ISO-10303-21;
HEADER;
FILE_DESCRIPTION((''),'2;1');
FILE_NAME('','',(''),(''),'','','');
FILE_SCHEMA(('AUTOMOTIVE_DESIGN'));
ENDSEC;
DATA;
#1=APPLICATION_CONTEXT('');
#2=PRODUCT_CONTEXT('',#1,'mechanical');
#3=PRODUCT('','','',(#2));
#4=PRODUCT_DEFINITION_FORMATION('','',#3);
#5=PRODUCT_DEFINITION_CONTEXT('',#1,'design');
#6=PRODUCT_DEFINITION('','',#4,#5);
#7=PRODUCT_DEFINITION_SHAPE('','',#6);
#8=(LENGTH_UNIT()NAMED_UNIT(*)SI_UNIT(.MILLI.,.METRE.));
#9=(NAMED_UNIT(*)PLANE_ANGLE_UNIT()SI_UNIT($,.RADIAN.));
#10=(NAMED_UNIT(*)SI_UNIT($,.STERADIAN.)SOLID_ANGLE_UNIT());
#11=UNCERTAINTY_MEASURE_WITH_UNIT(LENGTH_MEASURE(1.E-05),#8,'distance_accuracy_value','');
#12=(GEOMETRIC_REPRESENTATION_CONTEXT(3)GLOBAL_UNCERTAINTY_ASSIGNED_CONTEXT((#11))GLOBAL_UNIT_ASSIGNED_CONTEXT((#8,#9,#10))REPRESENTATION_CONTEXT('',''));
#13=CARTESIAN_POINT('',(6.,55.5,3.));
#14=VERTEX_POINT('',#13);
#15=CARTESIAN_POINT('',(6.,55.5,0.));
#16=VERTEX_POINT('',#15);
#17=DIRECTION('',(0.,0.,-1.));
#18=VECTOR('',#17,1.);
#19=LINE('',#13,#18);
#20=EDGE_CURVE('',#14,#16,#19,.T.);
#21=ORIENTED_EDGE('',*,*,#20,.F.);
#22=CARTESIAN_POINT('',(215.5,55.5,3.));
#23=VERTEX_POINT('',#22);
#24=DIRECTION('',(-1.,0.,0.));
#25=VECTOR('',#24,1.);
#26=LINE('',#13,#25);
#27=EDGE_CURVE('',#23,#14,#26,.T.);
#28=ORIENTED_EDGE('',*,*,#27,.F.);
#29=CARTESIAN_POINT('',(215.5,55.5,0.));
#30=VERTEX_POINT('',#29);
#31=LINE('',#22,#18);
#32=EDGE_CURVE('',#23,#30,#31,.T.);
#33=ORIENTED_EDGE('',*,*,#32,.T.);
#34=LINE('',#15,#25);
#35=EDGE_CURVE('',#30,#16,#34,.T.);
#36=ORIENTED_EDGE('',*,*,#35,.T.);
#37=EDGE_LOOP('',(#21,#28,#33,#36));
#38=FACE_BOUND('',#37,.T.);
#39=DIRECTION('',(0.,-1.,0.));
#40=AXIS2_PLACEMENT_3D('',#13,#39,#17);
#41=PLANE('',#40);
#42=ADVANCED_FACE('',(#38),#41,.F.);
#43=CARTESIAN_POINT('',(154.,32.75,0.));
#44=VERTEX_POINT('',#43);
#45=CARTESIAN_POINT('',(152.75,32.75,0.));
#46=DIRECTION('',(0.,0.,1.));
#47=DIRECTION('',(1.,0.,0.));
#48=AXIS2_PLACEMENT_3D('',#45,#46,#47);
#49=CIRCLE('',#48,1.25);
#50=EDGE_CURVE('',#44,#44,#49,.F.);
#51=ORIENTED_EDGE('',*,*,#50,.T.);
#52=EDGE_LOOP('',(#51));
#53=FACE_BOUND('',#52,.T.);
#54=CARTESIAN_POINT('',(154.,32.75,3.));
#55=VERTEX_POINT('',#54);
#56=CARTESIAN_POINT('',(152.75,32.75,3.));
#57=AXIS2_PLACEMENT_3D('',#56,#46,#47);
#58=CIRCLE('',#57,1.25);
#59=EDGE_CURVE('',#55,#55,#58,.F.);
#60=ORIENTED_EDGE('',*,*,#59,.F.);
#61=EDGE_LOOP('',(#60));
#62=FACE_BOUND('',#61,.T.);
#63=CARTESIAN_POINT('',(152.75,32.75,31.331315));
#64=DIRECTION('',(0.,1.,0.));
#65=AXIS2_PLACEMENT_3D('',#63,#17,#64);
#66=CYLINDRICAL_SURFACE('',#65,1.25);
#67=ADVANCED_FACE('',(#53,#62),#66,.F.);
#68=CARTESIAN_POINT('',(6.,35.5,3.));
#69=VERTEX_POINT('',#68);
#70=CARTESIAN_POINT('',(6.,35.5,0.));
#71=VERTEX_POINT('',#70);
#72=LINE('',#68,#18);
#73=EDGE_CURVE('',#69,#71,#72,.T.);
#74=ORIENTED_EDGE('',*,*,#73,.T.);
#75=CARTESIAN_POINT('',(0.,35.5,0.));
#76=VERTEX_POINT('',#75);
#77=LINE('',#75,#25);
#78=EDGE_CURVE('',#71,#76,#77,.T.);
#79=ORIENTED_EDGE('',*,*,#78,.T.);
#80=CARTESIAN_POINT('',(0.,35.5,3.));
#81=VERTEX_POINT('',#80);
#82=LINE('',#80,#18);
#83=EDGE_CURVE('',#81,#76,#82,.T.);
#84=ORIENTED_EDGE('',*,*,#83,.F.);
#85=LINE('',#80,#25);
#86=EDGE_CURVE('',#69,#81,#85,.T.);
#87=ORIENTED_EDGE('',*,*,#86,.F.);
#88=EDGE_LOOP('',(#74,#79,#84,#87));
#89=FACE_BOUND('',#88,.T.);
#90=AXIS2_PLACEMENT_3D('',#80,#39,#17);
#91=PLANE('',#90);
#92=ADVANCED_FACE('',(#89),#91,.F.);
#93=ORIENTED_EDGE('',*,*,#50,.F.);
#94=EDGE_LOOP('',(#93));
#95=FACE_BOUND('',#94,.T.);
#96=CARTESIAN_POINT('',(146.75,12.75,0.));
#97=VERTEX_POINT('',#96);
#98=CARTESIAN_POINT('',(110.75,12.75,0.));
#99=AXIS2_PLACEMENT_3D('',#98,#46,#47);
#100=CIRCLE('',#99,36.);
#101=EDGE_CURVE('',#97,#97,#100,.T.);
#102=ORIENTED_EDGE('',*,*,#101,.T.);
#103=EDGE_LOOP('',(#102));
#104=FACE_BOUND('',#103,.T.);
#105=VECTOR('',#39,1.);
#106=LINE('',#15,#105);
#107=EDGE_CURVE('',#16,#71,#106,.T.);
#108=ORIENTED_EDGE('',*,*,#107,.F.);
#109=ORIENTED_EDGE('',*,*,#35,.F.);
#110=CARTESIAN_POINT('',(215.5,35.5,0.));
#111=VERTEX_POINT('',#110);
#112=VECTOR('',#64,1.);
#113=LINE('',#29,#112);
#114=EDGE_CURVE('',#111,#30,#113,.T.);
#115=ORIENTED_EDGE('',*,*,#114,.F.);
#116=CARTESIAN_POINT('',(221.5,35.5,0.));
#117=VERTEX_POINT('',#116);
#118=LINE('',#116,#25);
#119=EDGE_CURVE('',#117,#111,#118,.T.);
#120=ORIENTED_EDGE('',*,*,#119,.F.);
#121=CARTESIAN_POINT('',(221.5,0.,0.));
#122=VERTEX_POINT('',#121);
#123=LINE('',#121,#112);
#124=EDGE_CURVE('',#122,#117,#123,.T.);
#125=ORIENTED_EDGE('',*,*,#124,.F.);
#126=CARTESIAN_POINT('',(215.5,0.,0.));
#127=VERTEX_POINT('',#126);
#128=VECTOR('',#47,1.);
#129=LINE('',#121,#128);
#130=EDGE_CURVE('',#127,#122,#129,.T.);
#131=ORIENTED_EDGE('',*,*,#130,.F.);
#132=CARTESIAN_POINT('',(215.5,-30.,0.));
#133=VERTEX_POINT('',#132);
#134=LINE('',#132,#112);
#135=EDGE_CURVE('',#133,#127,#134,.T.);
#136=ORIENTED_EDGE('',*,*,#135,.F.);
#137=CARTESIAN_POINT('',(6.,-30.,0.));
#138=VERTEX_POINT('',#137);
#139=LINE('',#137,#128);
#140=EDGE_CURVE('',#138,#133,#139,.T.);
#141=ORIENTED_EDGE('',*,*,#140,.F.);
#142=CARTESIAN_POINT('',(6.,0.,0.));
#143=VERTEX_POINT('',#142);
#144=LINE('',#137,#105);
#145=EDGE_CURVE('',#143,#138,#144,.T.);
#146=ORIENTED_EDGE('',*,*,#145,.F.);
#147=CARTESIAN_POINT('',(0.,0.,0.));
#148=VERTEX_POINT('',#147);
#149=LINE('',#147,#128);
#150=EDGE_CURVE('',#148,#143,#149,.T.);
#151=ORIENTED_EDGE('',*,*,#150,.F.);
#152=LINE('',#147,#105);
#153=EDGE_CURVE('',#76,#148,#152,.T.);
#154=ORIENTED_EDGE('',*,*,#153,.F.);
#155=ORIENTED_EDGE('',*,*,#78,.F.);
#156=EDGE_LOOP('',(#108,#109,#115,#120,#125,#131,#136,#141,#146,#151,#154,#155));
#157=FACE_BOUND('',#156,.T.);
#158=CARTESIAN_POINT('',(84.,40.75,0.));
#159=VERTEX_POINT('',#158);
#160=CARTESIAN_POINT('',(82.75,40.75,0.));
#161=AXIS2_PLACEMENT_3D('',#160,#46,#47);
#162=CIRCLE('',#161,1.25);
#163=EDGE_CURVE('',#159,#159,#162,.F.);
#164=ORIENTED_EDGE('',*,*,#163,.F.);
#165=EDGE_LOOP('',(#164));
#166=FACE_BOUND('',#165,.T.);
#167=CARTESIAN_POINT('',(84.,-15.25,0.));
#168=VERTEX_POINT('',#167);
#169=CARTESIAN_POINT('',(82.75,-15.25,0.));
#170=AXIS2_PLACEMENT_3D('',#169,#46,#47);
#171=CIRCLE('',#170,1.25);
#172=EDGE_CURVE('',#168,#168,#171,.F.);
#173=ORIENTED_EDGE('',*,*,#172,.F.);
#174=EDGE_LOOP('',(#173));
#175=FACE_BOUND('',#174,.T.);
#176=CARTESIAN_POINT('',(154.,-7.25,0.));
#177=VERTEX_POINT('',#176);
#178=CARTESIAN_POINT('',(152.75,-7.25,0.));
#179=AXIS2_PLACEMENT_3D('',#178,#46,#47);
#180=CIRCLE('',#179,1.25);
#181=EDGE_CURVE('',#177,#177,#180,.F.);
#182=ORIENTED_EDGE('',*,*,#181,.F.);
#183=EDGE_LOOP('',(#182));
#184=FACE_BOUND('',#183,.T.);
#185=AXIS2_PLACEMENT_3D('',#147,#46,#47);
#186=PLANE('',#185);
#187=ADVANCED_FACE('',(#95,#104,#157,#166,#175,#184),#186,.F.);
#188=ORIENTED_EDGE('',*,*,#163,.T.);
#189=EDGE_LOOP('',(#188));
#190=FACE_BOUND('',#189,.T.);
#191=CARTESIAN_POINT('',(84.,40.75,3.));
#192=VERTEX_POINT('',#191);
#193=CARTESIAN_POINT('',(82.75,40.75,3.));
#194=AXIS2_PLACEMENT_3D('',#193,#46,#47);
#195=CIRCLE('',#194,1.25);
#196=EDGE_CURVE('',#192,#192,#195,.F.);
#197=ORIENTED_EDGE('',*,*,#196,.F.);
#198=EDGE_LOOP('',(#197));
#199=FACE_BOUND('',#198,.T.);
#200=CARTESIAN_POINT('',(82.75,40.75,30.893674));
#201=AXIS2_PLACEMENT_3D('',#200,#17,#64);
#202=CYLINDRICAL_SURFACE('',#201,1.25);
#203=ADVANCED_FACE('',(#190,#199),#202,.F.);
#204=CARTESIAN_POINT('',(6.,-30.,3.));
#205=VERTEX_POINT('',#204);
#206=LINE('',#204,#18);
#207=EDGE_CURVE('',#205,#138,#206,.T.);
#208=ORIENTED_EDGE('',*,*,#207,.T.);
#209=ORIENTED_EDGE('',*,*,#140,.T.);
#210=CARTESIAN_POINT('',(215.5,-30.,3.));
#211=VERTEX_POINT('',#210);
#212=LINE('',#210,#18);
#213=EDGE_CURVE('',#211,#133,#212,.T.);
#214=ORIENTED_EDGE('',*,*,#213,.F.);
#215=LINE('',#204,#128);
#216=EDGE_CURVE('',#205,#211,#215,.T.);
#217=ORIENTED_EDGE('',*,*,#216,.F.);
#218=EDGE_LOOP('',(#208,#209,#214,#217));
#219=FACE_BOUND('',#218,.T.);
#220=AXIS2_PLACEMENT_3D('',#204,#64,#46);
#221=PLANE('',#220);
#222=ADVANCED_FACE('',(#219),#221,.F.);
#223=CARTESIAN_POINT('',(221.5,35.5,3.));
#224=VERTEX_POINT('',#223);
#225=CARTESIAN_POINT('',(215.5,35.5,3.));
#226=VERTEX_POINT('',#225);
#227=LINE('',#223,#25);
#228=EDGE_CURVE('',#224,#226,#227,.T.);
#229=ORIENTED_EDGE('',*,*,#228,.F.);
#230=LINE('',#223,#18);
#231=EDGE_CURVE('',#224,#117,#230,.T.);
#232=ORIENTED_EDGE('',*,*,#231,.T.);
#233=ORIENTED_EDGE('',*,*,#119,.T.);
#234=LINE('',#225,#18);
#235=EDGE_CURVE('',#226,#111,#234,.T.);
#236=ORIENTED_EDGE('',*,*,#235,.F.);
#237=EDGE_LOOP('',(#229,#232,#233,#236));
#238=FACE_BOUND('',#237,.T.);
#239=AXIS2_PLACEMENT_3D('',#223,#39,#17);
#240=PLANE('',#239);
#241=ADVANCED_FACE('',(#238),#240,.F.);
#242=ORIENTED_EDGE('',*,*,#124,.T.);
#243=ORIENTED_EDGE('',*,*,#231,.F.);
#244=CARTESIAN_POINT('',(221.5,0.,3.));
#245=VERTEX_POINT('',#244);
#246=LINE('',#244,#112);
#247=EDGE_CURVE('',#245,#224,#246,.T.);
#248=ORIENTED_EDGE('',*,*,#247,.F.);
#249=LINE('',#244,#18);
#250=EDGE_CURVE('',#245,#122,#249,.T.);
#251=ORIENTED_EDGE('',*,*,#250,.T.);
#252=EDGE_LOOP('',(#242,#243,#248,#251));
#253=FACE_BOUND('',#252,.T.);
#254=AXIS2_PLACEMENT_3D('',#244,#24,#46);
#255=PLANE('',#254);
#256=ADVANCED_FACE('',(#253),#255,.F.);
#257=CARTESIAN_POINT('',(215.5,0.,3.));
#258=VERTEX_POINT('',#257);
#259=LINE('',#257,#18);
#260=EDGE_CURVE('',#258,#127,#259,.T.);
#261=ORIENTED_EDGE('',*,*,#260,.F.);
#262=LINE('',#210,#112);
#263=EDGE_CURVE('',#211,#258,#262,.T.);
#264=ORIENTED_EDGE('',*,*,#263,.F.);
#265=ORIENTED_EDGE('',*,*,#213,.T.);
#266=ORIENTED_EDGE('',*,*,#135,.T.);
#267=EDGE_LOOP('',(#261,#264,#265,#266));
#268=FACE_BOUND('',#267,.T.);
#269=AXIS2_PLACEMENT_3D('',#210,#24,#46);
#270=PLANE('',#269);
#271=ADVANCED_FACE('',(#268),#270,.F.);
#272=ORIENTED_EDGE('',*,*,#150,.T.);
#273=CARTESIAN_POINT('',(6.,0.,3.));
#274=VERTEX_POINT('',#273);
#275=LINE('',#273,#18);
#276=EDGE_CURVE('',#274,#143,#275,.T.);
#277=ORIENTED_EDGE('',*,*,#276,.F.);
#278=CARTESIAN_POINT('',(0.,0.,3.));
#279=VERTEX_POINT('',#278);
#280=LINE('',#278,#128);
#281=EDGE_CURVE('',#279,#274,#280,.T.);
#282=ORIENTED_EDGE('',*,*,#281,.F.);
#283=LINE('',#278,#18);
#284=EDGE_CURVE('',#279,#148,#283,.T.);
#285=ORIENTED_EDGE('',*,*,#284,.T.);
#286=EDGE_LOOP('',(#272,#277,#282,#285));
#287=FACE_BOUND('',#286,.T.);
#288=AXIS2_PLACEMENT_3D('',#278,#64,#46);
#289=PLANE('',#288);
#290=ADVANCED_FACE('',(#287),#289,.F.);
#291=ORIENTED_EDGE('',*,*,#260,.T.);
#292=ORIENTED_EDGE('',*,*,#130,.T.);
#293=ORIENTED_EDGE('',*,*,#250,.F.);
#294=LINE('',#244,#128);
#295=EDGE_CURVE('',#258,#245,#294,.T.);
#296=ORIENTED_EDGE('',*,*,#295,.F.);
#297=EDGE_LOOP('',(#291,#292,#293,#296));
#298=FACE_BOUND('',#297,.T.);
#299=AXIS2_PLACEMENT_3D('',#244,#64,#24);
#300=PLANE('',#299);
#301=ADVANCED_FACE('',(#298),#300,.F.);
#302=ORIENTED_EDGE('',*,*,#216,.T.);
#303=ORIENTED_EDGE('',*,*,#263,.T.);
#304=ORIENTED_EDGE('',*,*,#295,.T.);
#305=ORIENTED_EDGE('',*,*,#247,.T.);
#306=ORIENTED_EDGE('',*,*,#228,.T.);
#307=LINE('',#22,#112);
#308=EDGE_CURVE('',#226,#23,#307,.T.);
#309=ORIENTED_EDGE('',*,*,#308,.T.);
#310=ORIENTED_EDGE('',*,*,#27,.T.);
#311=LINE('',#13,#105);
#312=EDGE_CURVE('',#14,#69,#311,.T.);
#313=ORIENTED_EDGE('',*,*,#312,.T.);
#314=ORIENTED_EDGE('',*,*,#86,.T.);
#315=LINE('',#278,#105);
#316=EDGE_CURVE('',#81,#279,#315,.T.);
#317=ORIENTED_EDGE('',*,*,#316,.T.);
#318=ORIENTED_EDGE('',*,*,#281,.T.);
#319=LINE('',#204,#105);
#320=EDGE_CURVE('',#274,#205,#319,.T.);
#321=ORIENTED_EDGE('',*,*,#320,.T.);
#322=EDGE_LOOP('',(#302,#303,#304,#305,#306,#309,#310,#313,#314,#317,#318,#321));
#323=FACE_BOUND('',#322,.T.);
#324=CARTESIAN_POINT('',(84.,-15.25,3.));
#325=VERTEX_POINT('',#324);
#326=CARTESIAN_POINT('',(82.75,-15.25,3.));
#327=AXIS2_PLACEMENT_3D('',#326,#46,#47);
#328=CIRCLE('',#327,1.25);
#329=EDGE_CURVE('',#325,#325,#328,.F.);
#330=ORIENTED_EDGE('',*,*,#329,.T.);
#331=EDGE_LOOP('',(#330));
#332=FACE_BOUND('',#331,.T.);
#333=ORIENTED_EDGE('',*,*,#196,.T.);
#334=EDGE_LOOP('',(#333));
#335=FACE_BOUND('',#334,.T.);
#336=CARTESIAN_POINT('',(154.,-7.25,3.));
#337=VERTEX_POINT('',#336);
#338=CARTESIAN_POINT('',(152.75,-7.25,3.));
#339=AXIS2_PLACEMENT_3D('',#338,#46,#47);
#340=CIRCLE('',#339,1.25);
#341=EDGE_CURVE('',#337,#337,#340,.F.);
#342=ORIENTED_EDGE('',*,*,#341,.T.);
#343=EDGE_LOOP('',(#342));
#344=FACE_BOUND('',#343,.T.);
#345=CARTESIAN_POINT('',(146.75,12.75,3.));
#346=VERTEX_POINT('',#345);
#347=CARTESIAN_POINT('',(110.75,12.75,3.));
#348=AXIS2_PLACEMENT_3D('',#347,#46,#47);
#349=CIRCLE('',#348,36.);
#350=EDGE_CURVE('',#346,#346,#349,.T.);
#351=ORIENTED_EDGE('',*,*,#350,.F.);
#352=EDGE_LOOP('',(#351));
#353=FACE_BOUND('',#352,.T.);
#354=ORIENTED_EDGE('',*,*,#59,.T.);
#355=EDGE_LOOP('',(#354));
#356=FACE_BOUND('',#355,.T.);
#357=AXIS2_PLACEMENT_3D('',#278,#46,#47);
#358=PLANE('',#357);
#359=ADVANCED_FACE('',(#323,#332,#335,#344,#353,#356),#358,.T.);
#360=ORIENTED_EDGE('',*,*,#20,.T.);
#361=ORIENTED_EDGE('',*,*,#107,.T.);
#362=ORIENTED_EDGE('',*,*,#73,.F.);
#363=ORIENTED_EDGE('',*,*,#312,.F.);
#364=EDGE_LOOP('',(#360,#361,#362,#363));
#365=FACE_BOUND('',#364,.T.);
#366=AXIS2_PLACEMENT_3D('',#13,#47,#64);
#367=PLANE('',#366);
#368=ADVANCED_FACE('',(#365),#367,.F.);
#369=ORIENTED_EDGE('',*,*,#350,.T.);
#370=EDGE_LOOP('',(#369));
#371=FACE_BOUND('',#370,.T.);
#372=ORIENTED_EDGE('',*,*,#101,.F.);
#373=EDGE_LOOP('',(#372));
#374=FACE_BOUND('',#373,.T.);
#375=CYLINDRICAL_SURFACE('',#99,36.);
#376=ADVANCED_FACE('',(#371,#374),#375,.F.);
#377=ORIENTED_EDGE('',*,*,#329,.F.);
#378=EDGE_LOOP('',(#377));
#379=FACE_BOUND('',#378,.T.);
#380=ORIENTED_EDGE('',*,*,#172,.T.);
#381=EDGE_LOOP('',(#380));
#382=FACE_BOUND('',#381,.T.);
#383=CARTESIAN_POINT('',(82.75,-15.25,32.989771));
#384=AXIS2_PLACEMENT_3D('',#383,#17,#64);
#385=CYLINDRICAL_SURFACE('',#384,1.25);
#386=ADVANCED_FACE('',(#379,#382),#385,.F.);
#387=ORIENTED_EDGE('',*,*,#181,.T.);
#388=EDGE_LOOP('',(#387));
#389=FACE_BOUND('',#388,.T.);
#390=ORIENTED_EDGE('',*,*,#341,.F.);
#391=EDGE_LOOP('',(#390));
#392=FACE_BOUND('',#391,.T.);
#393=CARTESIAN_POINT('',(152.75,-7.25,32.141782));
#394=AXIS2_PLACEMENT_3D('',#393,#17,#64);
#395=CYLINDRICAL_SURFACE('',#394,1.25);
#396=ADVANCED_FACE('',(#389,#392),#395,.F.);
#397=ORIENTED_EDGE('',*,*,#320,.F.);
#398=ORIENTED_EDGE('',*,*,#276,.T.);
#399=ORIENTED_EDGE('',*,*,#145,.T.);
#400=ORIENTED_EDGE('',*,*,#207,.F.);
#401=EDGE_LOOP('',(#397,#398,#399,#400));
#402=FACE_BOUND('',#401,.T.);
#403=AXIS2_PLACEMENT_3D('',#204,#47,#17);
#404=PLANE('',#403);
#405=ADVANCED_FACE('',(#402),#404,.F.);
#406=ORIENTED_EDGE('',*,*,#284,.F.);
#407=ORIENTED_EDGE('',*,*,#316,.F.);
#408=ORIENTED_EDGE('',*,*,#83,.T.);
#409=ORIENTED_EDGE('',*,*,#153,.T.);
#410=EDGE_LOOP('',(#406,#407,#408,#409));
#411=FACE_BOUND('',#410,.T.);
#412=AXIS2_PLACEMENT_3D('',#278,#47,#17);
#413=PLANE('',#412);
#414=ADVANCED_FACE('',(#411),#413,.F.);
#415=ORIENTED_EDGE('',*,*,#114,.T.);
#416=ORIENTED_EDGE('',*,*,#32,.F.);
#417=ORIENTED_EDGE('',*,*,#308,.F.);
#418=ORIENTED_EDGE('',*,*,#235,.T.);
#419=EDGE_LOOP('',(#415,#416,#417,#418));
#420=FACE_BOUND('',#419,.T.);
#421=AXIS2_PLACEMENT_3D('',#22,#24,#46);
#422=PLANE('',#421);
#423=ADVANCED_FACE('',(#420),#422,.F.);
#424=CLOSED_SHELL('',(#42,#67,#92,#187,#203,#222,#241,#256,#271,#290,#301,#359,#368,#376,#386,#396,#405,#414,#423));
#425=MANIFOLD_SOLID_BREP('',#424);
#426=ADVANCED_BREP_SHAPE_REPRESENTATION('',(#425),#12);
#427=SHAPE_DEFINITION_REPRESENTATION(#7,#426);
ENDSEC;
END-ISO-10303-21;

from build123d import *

# Parameters (mm, degrees)
BOSS_EXTRUDE1_DEPTH = 3
SKETCH2_R           = 36
CUT_EXTRUDE1_DEPTH  = 229.367029144
CAVITY1_OUTLINE_R   = 1.25
CAVITY1_DEPTH       = 3


# Read off the part's stored shape, not the designer's step: Cavity1
with BuildPart() as part:
    # Sketch1 → Boss-Extrude1 (new body)
    with BuildSketch(Plane.XY):
        Polygon((6, -30), (215.5, -30), (215.5, 0), (221.5, 0), (221.5, 35.5), (215.5, 35.5), (215.5, 55.5), (6, 55.5), (6, 35.5), (0, 35.5), (0, 0), (6, 0), align=None)
    extrude(amount=BOSS_EXTRUDE1_DEPTH)

    # Sketch2 → Cut-Extrude1 (cut, through all)
    with BuildSketch(Plane.XY.offset(3)):
        with Locations((110.75, 12.75)):
            Circle(SKETCH2_R)
    extrude(amount=-CUT_EXTRUDE1_DEPTH, mode=Mode.SUBTRACT)

    # Cavity1 outline → Cavity1 (cut)
    with BuildSketch(Plane.XY):
        with Locations((152.75, 32.75)):
            Circle(CAVITY1_OUTLINE_R)
        with Locations((152.75, -7.25)):
            Circle(CAVITY1_OUTLINE_R)
        with Locations((82.75, -15.25)):
            Circle(CAVITY1_OUTLINE_R)
        with Locations((82.75, 40.75)):
            Circle(CAVITY1_OUTLINE_R)
    extrude(amount=CAVITY1_DEPTH, mode=Mode.SUBTRACT)


solid = part.part
